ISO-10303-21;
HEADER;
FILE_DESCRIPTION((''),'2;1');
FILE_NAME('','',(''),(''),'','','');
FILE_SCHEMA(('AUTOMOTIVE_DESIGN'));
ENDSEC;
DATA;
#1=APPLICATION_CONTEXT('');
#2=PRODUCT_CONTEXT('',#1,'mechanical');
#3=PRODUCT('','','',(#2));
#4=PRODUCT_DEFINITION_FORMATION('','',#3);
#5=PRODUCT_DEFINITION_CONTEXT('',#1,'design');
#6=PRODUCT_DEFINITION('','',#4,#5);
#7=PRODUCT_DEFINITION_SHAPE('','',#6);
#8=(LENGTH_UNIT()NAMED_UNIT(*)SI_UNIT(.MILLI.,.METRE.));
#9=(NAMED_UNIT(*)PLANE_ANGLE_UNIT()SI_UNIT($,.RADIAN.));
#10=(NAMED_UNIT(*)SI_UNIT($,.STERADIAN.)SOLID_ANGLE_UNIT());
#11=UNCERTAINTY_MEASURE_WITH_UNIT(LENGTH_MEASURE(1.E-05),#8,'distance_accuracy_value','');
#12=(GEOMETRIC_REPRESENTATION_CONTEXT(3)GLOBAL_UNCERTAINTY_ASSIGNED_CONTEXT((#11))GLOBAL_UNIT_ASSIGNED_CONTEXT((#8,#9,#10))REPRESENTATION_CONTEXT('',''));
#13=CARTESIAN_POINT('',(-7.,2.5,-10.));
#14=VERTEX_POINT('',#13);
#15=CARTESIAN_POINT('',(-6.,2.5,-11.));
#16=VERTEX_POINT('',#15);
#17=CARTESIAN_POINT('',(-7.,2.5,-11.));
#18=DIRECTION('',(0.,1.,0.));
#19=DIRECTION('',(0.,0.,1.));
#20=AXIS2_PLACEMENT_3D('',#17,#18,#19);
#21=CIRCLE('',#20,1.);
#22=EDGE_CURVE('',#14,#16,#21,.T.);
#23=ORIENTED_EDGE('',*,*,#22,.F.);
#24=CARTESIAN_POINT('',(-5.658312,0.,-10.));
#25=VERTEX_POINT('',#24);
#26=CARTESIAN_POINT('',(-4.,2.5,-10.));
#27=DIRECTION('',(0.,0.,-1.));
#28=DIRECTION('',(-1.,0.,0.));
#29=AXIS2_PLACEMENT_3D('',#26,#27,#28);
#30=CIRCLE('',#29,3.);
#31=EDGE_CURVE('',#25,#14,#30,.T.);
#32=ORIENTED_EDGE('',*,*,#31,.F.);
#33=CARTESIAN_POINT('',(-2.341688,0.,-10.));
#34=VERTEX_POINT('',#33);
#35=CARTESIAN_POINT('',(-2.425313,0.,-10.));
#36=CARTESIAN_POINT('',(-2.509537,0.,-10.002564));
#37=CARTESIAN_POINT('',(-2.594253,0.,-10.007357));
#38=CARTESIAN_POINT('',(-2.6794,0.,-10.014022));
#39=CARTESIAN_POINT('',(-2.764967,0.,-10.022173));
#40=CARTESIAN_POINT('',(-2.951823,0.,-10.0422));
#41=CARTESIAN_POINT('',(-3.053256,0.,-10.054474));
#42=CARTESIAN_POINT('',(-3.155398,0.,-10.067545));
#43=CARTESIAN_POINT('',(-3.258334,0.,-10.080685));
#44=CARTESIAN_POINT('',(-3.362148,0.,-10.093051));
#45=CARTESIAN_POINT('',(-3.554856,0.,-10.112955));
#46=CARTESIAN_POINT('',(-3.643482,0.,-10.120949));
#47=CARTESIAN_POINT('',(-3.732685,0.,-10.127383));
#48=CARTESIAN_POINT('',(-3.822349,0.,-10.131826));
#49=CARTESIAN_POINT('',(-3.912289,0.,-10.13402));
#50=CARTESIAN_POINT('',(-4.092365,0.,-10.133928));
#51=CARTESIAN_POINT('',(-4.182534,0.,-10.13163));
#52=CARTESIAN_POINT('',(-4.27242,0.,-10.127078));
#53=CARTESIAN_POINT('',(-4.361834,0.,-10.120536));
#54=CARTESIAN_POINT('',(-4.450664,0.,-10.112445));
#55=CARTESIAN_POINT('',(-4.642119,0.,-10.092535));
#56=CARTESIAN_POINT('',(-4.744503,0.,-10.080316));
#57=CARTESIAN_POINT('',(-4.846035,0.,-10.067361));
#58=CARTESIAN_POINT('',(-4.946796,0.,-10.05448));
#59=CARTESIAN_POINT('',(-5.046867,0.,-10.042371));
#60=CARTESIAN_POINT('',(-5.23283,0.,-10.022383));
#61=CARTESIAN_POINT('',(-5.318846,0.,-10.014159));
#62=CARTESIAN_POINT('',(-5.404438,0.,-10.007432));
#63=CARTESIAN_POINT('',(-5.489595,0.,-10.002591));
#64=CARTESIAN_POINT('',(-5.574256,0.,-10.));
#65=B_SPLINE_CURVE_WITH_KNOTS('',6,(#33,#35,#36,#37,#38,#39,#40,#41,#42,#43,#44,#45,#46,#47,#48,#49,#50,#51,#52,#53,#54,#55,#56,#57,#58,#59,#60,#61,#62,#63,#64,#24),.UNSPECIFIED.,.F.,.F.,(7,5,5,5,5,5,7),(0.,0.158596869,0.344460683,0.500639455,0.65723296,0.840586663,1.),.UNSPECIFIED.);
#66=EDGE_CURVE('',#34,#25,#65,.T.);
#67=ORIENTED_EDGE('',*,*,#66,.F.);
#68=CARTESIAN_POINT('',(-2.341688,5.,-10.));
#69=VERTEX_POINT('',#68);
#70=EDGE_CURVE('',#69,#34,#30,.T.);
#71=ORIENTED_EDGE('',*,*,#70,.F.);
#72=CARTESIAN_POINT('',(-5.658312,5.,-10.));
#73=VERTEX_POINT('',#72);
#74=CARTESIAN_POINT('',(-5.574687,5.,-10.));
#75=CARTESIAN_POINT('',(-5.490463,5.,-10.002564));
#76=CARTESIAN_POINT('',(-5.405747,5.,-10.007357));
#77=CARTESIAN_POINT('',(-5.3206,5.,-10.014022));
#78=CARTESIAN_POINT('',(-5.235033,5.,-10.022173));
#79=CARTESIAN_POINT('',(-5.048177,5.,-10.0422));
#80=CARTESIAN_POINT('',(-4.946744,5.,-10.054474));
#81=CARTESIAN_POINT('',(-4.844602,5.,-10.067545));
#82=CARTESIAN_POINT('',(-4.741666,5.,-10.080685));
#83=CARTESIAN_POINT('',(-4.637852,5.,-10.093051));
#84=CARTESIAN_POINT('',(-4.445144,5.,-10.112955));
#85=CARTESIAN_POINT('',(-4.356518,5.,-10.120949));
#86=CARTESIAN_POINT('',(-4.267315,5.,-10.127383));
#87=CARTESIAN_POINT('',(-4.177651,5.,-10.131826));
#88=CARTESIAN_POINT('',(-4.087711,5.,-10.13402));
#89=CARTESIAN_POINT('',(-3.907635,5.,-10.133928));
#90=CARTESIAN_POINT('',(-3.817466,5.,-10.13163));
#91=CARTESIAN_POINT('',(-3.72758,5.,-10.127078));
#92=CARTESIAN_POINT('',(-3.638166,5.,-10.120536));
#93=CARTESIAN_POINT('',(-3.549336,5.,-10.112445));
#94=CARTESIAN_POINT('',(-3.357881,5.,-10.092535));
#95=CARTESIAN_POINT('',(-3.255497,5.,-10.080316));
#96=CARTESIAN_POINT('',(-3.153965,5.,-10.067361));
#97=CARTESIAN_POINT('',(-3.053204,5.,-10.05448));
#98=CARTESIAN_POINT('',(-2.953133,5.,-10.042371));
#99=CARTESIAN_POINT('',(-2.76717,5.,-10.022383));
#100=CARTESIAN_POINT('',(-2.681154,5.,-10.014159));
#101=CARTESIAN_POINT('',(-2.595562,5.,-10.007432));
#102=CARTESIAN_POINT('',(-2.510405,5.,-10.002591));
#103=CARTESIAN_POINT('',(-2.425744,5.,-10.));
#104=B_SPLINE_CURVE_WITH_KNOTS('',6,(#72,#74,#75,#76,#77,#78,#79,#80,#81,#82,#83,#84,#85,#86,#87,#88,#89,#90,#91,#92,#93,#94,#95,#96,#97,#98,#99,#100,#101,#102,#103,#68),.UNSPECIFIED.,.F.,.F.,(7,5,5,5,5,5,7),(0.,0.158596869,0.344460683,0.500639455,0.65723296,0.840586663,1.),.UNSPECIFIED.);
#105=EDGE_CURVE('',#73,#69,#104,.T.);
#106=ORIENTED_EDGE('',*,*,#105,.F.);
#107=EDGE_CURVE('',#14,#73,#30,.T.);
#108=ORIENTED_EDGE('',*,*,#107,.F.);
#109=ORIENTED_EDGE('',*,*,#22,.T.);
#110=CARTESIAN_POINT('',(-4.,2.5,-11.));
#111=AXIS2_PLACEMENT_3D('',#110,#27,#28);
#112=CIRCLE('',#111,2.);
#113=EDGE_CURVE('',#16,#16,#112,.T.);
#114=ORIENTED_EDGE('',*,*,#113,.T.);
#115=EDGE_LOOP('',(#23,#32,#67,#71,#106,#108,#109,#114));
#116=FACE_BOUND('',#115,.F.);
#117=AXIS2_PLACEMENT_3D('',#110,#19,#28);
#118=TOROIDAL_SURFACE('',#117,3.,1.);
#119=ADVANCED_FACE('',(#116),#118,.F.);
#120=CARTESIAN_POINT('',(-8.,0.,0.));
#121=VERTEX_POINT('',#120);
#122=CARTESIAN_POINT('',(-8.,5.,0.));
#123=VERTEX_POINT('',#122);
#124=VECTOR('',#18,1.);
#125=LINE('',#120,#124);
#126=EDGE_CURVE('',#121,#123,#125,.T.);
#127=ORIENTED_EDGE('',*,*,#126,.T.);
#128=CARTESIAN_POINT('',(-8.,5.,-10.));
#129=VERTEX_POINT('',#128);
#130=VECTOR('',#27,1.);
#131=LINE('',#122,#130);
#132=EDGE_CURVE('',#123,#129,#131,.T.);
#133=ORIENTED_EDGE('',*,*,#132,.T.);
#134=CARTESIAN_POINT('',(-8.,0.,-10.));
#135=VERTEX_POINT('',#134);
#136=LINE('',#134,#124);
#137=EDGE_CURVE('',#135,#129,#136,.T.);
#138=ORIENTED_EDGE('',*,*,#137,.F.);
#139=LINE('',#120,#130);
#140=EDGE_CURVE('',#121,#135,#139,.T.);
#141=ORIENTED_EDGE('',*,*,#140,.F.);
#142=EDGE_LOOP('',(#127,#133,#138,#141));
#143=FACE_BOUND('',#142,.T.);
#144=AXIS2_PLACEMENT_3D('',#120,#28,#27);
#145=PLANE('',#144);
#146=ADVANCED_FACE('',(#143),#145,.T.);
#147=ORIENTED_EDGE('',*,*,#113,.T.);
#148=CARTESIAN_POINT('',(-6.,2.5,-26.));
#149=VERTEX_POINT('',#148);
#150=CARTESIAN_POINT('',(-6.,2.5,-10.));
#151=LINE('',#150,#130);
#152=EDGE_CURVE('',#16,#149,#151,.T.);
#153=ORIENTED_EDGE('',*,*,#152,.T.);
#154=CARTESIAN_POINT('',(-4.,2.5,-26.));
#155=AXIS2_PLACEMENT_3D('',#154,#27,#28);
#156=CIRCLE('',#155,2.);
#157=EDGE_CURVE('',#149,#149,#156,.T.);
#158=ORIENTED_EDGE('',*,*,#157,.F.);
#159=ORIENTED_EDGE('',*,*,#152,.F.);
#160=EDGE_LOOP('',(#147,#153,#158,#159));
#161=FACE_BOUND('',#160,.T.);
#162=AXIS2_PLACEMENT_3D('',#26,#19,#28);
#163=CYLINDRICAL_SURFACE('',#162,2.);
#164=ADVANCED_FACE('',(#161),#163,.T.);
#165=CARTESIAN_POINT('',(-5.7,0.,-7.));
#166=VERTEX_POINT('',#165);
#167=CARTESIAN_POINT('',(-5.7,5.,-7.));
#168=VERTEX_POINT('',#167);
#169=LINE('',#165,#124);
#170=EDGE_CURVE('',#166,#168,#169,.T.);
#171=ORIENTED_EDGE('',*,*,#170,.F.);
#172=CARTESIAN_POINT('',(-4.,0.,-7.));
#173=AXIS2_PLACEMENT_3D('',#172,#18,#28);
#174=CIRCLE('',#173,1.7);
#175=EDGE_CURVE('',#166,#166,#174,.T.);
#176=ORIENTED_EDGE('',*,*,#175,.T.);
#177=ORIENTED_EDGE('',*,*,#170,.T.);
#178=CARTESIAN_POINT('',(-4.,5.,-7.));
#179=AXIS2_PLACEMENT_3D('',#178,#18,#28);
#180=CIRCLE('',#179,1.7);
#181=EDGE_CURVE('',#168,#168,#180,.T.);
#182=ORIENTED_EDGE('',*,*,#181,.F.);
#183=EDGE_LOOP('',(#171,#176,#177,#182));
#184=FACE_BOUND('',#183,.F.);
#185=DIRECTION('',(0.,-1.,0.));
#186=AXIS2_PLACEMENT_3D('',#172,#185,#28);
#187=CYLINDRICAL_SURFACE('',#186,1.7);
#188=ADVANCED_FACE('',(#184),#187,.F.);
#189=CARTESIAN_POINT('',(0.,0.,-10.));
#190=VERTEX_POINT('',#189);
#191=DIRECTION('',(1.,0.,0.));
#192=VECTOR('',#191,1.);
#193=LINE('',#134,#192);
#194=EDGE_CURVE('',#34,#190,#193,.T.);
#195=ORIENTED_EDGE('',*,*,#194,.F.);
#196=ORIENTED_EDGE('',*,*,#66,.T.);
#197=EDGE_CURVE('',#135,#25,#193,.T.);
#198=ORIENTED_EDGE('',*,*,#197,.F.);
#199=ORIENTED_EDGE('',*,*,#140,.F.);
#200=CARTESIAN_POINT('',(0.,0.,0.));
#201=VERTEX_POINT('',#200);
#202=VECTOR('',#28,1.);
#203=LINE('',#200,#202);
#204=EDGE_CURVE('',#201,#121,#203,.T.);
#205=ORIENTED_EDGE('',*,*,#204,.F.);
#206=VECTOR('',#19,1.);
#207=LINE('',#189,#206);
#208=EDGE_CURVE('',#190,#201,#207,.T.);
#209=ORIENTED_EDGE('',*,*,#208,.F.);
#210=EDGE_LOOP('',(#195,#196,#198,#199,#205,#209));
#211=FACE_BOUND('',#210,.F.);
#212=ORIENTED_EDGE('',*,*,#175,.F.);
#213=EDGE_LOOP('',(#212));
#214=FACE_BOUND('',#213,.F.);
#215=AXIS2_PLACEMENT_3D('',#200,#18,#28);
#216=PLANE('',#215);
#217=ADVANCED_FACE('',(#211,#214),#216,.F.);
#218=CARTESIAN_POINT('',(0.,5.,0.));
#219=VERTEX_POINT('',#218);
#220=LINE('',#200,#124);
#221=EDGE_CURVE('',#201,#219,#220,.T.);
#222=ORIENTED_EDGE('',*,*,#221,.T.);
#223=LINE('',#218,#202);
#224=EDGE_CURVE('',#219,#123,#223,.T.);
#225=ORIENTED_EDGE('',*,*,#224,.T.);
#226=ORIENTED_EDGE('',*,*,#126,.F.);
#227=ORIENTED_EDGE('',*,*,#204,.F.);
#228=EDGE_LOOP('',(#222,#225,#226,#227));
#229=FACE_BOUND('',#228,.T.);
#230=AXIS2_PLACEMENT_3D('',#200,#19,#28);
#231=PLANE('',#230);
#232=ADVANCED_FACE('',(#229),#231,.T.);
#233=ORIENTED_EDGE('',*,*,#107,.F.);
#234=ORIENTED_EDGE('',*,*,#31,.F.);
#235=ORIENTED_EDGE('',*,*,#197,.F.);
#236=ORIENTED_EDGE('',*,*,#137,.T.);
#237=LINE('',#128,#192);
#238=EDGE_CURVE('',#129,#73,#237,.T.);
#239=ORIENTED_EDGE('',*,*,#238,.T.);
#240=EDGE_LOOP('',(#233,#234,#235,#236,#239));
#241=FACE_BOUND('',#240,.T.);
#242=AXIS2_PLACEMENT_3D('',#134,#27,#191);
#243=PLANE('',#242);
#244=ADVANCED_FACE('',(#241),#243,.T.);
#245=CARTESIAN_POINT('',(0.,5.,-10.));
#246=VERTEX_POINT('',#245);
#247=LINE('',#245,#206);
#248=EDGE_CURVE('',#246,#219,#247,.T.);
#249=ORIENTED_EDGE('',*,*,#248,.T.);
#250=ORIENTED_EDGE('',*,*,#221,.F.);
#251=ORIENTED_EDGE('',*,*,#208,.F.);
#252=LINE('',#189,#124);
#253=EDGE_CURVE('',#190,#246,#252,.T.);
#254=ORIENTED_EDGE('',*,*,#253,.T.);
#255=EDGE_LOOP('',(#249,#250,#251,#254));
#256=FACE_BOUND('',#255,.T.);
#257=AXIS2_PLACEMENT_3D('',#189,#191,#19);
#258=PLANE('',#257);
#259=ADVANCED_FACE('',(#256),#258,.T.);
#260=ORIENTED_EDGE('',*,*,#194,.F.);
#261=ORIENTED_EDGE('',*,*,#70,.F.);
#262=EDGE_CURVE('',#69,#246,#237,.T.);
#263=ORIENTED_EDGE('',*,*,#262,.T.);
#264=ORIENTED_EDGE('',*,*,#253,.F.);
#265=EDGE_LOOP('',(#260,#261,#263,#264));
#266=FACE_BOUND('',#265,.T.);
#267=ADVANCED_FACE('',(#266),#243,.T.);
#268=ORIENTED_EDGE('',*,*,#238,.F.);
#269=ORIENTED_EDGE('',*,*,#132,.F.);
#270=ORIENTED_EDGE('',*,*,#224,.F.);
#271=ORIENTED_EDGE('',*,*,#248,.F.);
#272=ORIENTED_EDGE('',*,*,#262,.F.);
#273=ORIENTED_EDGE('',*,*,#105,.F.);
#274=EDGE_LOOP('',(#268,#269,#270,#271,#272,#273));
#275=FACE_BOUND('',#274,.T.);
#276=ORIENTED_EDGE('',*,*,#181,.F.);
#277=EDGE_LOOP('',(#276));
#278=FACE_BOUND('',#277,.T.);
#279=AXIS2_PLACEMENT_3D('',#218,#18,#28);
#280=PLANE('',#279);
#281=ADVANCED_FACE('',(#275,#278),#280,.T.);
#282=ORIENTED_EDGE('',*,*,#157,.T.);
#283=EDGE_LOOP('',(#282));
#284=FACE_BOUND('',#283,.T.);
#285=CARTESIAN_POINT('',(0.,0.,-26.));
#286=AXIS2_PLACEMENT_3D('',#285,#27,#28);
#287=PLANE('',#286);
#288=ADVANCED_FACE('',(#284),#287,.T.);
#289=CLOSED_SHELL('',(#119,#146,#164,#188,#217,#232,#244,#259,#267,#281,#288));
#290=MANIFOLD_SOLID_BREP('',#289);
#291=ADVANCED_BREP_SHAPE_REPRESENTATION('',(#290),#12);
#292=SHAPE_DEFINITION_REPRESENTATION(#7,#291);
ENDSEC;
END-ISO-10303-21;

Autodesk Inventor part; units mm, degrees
ref_plane "YZ Plane" through (0, 0, 0) normal (1, 0, 0) x (0, 1, 0)
ref_plane "XZ Plane" through (0, 0, 0) normal (0, 1, 0) x (-1, 0, 0)
ref_plane "XY Plane" through (0, 0, 0) normal (0, 0, 1) x (1, 0, 0)
sketch "Esquisse7" plane through (0, 0, 0) normal (0, 1, 0) x (-1, 0, 0)
  line L0 (0, 0) -> (8, 0)
  line L1 (8, 0) -> (8, -10)
  line L2 (8, -10) -> (0, -10)
  line L3 (0, -10) -> (0, 0)
  line L4 (4, -10) -> (4, 0) construction
  circle A0 centre (4, -7) radius 1.7
  dimension "d15" = 3.4
  dimension "d16" = 10
  dimension "d17" = 8
  dimension "d24" = 3
extrude "Extrusion5" add sketch "Esquisse7" along normal blind 5
sketch "Esquisse8" plane through (0, 0, -10) normal (0, 0, -1) x (-1, 0, 0)
  line L0 (8, 5) -> (0, 5) construction
  line L1 (4, 5) -> (4, 0) construction
  line L2 (0, 0) -> (8, 0) construction
  circle A0 centre (4, 2.5) radius 2
  dimension "d20" = 4
extrude "Extrusion6" add sketch "Esquisse8" along normal blind 16
fillet "Congé3" radius 1 1 edges at (-2, 2.5, -10)
sketch "Esquisse9" plane through (-4, 2.5, -26) normal (0, 0, -1) x (-1, 0, 0)
  circle A0 centre (0, 0) radius 2 projected
  arc A1 (-1.6583, 2.5) -> (-1.6583, -2.5) centre (0, 0) ccw projected
  arc A2 (-1.6583, 2.5) -> (-1.6583, -2.5) centre (0, 0) ccw projected
  line L0 (-4, 2.5) -> (-1.6583, 2.5) projected
  line L1 (-4, -2.5) -> (-4, 2.5) projected
  line L2 (-1.6583, -2.5) -> (-4, -2.5) projected
  point P0 (-4, -2.5)
properties part number "charniere"
